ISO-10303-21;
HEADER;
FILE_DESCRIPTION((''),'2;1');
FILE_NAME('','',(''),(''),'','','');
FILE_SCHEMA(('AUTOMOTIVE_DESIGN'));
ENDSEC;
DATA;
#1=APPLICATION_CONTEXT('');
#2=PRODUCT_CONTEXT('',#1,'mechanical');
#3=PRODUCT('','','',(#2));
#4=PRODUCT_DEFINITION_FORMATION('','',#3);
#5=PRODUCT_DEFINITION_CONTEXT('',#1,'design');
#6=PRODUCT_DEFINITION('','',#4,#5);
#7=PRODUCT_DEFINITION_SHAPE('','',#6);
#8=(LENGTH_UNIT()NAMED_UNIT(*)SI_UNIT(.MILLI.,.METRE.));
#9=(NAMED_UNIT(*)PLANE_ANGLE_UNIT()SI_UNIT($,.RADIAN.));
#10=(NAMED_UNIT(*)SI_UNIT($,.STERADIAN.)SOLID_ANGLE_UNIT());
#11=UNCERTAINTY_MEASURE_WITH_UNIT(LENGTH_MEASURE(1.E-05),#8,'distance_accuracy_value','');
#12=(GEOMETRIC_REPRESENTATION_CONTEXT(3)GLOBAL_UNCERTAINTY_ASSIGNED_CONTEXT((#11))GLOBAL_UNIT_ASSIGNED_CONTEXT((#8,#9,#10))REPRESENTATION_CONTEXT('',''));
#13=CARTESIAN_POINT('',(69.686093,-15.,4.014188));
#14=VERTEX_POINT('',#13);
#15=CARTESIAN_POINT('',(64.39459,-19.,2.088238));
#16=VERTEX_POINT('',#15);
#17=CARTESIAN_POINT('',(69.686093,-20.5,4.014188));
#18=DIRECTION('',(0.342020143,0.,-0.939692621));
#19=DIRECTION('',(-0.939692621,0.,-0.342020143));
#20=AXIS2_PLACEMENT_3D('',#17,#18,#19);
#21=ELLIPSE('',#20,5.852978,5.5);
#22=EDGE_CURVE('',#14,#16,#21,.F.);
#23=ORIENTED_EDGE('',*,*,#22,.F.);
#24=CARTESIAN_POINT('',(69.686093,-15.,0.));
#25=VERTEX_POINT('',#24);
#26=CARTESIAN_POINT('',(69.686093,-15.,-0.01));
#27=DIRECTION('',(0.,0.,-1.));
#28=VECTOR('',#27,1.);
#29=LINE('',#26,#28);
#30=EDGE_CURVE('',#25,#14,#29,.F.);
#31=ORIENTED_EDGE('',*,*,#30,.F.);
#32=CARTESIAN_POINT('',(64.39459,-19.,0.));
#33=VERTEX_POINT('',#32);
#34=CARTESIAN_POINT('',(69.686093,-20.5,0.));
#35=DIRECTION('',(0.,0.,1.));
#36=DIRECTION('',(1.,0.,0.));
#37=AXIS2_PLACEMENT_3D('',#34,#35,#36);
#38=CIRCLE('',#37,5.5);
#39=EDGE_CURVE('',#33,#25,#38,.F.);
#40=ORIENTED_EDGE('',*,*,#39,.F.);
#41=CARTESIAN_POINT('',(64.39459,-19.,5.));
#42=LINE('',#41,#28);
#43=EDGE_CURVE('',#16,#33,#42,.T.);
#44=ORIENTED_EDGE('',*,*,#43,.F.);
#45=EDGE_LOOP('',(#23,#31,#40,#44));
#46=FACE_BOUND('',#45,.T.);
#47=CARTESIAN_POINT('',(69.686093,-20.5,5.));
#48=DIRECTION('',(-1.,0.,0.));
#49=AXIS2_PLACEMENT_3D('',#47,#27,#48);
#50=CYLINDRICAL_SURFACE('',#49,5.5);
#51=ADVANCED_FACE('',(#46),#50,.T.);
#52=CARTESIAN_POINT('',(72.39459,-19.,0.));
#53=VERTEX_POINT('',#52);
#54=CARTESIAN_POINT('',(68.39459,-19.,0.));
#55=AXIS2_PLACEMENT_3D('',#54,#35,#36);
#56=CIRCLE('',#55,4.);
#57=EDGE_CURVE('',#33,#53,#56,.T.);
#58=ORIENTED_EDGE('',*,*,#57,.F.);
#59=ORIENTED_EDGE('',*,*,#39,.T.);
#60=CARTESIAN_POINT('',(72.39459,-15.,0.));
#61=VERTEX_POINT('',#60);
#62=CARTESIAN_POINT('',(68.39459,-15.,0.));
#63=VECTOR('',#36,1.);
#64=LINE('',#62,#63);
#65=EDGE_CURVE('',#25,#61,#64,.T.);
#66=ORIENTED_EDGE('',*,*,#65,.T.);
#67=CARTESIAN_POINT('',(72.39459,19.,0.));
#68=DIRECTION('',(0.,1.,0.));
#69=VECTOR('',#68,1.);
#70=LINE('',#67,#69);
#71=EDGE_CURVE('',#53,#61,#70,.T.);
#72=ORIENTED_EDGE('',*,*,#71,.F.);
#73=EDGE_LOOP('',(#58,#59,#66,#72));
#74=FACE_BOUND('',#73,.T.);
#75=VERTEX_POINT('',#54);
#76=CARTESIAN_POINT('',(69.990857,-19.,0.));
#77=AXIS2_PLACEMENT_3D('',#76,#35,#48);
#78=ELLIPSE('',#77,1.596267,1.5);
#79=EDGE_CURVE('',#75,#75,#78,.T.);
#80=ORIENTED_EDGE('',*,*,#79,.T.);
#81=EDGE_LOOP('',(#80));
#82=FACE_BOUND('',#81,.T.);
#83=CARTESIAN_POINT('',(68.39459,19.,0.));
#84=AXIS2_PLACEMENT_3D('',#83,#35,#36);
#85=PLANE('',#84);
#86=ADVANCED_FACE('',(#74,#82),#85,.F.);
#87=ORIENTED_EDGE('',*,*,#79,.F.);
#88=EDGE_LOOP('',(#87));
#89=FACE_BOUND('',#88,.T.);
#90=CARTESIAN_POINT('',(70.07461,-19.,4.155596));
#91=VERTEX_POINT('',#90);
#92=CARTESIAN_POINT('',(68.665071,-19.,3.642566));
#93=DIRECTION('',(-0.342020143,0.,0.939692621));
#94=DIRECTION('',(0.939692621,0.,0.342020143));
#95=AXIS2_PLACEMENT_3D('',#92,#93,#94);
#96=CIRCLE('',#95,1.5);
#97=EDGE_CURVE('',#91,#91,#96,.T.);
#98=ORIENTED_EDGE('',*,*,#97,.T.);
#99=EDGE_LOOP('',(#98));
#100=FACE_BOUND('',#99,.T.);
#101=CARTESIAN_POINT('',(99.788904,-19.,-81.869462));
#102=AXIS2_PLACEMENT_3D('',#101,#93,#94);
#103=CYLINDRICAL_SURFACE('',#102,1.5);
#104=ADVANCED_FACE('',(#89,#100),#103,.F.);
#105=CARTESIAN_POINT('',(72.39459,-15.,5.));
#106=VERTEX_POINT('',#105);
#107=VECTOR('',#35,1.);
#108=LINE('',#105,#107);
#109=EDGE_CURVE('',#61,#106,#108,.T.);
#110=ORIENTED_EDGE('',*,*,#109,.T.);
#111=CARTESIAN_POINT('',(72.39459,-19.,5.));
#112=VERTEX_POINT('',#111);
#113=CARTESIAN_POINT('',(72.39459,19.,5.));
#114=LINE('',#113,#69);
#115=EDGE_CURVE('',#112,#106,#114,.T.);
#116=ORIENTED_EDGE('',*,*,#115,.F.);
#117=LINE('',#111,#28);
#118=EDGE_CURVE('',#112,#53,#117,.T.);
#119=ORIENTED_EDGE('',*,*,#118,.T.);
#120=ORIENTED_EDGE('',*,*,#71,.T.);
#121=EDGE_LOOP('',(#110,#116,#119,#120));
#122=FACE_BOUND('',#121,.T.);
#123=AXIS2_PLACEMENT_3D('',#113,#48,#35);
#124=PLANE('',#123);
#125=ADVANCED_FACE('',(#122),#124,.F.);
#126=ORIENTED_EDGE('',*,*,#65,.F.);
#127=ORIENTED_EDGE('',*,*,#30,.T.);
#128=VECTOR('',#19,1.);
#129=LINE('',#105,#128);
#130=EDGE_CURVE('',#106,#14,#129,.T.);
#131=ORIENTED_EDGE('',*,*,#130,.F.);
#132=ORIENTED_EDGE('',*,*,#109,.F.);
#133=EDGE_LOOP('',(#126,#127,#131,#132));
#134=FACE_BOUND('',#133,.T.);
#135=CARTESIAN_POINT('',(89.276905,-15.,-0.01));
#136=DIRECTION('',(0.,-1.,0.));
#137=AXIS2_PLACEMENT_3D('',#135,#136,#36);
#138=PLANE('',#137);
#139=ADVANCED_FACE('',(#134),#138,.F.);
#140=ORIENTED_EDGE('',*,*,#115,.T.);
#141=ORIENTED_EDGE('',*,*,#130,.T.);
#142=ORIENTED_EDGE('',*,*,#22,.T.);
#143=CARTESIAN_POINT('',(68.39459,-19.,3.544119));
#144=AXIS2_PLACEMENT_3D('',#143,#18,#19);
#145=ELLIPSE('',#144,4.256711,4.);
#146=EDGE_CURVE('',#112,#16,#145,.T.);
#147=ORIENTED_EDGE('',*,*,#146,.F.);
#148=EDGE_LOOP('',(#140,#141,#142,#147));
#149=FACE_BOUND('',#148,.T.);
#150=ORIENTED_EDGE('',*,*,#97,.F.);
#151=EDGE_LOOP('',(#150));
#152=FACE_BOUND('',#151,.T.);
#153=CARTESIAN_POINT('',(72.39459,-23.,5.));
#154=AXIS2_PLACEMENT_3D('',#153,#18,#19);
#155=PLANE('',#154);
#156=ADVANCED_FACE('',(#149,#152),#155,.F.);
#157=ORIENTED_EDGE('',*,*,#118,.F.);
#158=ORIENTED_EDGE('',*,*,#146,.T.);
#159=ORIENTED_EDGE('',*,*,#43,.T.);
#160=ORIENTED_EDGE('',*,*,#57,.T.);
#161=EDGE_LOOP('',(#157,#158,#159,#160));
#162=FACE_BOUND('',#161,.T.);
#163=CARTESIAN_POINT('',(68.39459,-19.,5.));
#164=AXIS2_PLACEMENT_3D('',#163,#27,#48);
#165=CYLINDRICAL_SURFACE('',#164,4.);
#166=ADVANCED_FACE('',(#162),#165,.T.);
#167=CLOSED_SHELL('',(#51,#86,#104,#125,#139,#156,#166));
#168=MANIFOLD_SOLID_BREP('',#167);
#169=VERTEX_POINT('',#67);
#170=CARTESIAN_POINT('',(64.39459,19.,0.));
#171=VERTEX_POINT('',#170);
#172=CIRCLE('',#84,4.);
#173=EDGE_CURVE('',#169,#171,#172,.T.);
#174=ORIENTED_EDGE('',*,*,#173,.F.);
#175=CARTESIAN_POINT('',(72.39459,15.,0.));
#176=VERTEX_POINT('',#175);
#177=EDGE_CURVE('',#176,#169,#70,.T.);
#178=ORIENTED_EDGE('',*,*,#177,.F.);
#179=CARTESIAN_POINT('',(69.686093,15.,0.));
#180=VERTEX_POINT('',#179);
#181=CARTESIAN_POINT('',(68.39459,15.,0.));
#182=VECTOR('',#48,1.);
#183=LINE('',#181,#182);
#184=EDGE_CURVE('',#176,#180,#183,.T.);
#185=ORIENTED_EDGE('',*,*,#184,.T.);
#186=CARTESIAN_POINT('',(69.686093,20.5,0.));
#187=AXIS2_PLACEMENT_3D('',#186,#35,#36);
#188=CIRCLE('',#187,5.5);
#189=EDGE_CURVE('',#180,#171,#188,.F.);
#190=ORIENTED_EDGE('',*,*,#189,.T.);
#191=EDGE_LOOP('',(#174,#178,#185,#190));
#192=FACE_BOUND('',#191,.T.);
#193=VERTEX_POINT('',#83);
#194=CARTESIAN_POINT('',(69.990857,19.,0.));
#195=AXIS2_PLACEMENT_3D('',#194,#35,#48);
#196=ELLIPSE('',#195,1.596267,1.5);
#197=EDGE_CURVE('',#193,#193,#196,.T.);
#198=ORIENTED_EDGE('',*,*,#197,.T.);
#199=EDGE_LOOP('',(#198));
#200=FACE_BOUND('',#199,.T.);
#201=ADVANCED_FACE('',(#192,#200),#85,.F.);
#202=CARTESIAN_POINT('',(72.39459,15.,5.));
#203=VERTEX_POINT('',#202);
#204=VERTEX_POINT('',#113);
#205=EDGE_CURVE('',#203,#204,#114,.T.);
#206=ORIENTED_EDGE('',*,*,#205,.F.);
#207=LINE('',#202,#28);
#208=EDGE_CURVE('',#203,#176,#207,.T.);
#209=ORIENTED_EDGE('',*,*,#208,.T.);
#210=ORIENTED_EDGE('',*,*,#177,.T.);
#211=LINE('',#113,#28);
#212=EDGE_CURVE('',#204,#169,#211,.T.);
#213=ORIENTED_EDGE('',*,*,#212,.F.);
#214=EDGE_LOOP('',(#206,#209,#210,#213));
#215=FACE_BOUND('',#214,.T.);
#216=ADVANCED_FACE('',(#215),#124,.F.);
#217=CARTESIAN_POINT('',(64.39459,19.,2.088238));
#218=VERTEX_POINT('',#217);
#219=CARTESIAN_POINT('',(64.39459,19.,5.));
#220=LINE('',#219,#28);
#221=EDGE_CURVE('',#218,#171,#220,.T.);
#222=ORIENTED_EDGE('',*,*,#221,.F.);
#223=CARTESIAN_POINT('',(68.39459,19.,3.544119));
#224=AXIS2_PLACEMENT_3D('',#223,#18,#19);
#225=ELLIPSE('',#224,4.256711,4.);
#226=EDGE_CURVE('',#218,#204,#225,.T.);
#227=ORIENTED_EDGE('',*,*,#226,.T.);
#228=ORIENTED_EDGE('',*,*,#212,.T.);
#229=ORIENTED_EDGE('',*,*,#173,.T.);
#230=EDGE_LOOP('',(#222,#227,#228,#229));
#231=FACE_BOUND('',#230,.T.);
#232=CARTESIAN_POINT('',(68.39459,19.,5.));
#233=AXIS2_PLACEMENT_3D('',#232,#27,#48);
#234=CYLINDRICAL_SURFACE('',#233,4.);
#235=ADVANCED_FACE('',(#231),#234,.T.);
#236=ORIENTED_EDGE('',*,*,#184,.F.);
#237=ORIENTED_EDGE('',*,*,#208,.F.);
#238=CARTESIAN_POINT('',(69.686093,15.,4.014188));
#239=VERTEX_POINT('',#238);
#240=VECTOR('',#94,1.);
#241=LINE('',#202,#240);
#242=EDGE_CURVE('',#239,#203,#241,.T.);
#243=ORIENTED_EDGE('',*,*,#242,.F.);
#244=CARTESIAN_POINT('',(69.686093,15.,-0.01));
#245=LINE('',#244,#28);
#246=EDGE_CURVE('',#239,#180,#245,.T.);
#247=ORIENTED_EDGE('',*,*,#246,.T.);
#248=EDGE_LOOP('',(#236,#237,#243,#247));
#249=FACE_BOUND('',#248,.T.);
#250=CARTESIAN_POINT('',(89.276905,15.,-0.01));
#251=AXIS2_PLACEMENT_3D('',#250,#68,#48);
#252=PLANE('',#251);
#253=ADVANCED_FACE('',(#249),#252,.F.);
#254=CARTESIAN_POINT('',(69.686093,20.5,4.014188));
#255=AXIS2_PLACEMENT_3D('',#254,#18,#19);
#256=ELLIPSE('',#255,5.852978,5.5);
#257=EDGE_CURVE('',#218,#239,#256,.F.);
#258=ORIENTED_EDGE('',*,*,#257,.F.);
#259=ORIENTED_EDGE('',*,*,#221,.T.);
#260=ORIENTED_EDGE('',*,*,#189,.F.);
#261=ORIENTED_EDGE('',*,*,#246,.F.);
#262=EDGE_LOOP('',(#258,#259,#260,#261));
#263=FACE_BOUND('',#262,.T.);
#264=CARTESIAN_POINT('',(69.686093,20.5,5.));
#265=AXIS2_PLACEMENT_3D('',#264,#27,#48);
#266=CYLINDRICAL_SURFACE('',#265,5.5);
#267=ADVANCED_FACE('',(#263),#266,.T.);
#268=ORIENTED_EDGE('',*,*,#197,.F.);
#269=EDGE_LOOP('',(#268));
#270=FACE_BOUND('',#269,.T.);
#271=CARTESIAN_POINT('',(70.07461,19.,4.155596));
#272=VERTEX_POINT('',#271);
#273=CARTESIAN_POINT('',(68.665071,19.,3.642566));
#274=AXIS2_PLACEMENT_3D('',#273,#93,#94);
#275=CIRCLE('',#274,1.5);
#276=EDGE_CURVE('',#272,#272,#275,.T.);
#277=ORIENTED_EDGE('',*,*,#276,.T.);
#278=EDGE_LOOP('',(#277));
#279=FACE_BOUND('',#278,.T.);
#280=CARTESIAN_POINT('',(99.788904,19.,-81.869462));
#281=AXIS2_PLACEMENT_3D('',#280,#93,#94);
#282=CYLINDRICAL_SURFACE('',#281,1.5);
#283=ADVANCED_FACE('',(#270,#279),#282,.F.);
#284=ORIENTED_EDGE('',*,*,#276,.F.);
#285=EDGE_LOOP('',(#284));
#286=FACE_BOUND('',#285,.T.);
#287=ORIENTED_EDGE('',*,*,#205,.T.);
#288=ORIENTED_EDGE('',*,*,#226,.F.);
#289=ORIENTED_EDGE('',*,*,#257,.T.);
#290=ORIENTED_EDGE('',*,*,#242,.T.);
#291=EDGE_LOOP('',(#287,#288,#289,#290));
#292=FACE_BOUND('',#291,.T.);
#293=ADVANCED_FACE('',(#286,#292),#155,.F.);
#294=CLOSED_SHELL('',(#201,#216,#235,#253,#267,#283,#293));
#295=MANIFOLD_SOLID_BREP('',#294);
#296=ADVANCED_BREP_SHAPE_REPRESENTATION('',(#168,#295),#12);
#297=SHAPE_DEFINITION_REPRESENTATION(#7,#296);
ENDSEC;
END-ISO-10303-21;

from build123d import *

# Parameters (mm, degrees)
BOSS_EXTRUDE1_DEPTH     = 5
CUT_EXTRUDE1_DEPTH      = 77.124744118
CUT_EXTRUDE1_DEPTH_BACK = 77.124744118
SKETCH3_R               = 1.5
CUT_EXTRUDE2_DEPTH      = 91
SPLIT1_SURFACE_1_BACK   = 47.957
SPLIT1_SURFACE_1_DEPTH  = 95.914
FILLET1_R               = 5.5
FILLET2_R               = 5.5


with BuildPart() as part:
    # Sketch1 → Boss-Extrude1 (new body)
    with BuildSketch(Plane.XY):
        with BuildLine():
            Line((72.394590039, 19), (72.394590039, -19))
            ThreePointArc((72.394590039, -19), (68.394590039, -23), (64.394590039, -19))
            Line((64.394590039, -19), (64.394590039, 19))
            ThreePointArc((64.394590039, 19), (68.394590039, 23), (72.394590039, 19))
        make_face()
    extrude(amount=BOSS_EXTRUDE1_DEPTH)

    # Sketch2 → Cut-Extrude1 (cut, two sides: drawn at the far end of the back side and taken through both)
    with BuildSketch(Plane(origin=(0, 0, 0), x_dir=(1, 0, 0), z_dir=(0, 1, 0)).offset(-CUT_EXTRUDE1_DEPTH_BACK)):
        Polygon((72.394590039, -5), (64.394590039, -2.088238126), (64.394590039, -5), align=None)
    extrude(amount=CUT_EXTRUDE1_DEPTH + CUT_EXTRUDE1_DEPTH_BACK, mode=Mode.SUBTRACT)

    # Sketch3 → Cut-Extrude2 (cut)
    with BuildSketch(Plane(origin=(6.86158929, 0, -18.852061635), x_dir=(0.939692620785907, 0, 0.3420201433256727), z_dir=(-0.3420201433256727, 0, 0.939692620785907))):
        with Locations((65.769891562, 19)):
            Circle(SKETCH3_R)
        with Locations((65.769891562, -19)):
            Circle(SKETCH3_R)
    extrude(amount=-CUT_EXTRUDE2_DEPTH, mode=Mode.SUBTRACT)

    # Split1: cut with a surface, the side it looks to stays
    # Split1 surface: a surface, the sketch's curves swept straight by 95.914 mm
    with BuildLine(Plane.XY.offset(-SPLIT1_SURFACE_1_BACK), mode=Mode.PRIVATE) as split1_surface_1_path:
        Line((89.276904546, -15), (55.512275533, -15))
        Line((55.512275533, -15), (55.512275533, 15))
        Line((55.512275533, 15), (89.276904546, 15))
        Line((89.276904546, 15), (89.276904546, -15))
    split1_surface_1 = Shell.extrude(split1_surface_1_path.wire(), (0 * SPLIT1_SURFACE_1_DEPTH, 0 * SPLIT1_SURFACE_1_DEPTH, 1 * SPLIT1_SURFACE_1_DEPTH))
    split(bisect_by=split1_surface_1, keep=Keep.TOP)

    # Fillet1
    # the kernel refuses this fillet: 5.5 mm, written as the material it takes off along each edge
    with BuildSketch(Plane(origin=(64.394590039, 15, 15.316994681), x_dir=(1, 0, 0), z_dir=(0, 0, -1))) as fillet1_piece_1:
        with BuildLine():
            CenterArc((5.291502622, -5.5), FILLET1_R, 90, 74.173379868)
            Line((0, -4), (0, 0))
            Line((0, 0), (5.291502622, 0))
        make_face()
    extrude(amount=28.545751237, mode=Mode.SUBTRACT)

    # Fillet2
    # the kernel refuses this fillet: 5.5 mm, written as the material it takes off along each edge
    with BuildSketch(Plane(origin=(64.394590039, -15, -13.228756555), x_dir=(1, 0, 0), z_dir=(0, 0, 1))) as fillet2_piece_1:
        with BuildLine():
            CenterArc((5.291502622, -5.5), FILLET2_R, 90, 74.173379868)
            Line((0, -4), (0, 0))
            Line((0, 0), (5.291502622, 0))
        make_face()
    extrude(amount=28.545751237, mode=Mode.SUBTRACT)


solid = part.part
